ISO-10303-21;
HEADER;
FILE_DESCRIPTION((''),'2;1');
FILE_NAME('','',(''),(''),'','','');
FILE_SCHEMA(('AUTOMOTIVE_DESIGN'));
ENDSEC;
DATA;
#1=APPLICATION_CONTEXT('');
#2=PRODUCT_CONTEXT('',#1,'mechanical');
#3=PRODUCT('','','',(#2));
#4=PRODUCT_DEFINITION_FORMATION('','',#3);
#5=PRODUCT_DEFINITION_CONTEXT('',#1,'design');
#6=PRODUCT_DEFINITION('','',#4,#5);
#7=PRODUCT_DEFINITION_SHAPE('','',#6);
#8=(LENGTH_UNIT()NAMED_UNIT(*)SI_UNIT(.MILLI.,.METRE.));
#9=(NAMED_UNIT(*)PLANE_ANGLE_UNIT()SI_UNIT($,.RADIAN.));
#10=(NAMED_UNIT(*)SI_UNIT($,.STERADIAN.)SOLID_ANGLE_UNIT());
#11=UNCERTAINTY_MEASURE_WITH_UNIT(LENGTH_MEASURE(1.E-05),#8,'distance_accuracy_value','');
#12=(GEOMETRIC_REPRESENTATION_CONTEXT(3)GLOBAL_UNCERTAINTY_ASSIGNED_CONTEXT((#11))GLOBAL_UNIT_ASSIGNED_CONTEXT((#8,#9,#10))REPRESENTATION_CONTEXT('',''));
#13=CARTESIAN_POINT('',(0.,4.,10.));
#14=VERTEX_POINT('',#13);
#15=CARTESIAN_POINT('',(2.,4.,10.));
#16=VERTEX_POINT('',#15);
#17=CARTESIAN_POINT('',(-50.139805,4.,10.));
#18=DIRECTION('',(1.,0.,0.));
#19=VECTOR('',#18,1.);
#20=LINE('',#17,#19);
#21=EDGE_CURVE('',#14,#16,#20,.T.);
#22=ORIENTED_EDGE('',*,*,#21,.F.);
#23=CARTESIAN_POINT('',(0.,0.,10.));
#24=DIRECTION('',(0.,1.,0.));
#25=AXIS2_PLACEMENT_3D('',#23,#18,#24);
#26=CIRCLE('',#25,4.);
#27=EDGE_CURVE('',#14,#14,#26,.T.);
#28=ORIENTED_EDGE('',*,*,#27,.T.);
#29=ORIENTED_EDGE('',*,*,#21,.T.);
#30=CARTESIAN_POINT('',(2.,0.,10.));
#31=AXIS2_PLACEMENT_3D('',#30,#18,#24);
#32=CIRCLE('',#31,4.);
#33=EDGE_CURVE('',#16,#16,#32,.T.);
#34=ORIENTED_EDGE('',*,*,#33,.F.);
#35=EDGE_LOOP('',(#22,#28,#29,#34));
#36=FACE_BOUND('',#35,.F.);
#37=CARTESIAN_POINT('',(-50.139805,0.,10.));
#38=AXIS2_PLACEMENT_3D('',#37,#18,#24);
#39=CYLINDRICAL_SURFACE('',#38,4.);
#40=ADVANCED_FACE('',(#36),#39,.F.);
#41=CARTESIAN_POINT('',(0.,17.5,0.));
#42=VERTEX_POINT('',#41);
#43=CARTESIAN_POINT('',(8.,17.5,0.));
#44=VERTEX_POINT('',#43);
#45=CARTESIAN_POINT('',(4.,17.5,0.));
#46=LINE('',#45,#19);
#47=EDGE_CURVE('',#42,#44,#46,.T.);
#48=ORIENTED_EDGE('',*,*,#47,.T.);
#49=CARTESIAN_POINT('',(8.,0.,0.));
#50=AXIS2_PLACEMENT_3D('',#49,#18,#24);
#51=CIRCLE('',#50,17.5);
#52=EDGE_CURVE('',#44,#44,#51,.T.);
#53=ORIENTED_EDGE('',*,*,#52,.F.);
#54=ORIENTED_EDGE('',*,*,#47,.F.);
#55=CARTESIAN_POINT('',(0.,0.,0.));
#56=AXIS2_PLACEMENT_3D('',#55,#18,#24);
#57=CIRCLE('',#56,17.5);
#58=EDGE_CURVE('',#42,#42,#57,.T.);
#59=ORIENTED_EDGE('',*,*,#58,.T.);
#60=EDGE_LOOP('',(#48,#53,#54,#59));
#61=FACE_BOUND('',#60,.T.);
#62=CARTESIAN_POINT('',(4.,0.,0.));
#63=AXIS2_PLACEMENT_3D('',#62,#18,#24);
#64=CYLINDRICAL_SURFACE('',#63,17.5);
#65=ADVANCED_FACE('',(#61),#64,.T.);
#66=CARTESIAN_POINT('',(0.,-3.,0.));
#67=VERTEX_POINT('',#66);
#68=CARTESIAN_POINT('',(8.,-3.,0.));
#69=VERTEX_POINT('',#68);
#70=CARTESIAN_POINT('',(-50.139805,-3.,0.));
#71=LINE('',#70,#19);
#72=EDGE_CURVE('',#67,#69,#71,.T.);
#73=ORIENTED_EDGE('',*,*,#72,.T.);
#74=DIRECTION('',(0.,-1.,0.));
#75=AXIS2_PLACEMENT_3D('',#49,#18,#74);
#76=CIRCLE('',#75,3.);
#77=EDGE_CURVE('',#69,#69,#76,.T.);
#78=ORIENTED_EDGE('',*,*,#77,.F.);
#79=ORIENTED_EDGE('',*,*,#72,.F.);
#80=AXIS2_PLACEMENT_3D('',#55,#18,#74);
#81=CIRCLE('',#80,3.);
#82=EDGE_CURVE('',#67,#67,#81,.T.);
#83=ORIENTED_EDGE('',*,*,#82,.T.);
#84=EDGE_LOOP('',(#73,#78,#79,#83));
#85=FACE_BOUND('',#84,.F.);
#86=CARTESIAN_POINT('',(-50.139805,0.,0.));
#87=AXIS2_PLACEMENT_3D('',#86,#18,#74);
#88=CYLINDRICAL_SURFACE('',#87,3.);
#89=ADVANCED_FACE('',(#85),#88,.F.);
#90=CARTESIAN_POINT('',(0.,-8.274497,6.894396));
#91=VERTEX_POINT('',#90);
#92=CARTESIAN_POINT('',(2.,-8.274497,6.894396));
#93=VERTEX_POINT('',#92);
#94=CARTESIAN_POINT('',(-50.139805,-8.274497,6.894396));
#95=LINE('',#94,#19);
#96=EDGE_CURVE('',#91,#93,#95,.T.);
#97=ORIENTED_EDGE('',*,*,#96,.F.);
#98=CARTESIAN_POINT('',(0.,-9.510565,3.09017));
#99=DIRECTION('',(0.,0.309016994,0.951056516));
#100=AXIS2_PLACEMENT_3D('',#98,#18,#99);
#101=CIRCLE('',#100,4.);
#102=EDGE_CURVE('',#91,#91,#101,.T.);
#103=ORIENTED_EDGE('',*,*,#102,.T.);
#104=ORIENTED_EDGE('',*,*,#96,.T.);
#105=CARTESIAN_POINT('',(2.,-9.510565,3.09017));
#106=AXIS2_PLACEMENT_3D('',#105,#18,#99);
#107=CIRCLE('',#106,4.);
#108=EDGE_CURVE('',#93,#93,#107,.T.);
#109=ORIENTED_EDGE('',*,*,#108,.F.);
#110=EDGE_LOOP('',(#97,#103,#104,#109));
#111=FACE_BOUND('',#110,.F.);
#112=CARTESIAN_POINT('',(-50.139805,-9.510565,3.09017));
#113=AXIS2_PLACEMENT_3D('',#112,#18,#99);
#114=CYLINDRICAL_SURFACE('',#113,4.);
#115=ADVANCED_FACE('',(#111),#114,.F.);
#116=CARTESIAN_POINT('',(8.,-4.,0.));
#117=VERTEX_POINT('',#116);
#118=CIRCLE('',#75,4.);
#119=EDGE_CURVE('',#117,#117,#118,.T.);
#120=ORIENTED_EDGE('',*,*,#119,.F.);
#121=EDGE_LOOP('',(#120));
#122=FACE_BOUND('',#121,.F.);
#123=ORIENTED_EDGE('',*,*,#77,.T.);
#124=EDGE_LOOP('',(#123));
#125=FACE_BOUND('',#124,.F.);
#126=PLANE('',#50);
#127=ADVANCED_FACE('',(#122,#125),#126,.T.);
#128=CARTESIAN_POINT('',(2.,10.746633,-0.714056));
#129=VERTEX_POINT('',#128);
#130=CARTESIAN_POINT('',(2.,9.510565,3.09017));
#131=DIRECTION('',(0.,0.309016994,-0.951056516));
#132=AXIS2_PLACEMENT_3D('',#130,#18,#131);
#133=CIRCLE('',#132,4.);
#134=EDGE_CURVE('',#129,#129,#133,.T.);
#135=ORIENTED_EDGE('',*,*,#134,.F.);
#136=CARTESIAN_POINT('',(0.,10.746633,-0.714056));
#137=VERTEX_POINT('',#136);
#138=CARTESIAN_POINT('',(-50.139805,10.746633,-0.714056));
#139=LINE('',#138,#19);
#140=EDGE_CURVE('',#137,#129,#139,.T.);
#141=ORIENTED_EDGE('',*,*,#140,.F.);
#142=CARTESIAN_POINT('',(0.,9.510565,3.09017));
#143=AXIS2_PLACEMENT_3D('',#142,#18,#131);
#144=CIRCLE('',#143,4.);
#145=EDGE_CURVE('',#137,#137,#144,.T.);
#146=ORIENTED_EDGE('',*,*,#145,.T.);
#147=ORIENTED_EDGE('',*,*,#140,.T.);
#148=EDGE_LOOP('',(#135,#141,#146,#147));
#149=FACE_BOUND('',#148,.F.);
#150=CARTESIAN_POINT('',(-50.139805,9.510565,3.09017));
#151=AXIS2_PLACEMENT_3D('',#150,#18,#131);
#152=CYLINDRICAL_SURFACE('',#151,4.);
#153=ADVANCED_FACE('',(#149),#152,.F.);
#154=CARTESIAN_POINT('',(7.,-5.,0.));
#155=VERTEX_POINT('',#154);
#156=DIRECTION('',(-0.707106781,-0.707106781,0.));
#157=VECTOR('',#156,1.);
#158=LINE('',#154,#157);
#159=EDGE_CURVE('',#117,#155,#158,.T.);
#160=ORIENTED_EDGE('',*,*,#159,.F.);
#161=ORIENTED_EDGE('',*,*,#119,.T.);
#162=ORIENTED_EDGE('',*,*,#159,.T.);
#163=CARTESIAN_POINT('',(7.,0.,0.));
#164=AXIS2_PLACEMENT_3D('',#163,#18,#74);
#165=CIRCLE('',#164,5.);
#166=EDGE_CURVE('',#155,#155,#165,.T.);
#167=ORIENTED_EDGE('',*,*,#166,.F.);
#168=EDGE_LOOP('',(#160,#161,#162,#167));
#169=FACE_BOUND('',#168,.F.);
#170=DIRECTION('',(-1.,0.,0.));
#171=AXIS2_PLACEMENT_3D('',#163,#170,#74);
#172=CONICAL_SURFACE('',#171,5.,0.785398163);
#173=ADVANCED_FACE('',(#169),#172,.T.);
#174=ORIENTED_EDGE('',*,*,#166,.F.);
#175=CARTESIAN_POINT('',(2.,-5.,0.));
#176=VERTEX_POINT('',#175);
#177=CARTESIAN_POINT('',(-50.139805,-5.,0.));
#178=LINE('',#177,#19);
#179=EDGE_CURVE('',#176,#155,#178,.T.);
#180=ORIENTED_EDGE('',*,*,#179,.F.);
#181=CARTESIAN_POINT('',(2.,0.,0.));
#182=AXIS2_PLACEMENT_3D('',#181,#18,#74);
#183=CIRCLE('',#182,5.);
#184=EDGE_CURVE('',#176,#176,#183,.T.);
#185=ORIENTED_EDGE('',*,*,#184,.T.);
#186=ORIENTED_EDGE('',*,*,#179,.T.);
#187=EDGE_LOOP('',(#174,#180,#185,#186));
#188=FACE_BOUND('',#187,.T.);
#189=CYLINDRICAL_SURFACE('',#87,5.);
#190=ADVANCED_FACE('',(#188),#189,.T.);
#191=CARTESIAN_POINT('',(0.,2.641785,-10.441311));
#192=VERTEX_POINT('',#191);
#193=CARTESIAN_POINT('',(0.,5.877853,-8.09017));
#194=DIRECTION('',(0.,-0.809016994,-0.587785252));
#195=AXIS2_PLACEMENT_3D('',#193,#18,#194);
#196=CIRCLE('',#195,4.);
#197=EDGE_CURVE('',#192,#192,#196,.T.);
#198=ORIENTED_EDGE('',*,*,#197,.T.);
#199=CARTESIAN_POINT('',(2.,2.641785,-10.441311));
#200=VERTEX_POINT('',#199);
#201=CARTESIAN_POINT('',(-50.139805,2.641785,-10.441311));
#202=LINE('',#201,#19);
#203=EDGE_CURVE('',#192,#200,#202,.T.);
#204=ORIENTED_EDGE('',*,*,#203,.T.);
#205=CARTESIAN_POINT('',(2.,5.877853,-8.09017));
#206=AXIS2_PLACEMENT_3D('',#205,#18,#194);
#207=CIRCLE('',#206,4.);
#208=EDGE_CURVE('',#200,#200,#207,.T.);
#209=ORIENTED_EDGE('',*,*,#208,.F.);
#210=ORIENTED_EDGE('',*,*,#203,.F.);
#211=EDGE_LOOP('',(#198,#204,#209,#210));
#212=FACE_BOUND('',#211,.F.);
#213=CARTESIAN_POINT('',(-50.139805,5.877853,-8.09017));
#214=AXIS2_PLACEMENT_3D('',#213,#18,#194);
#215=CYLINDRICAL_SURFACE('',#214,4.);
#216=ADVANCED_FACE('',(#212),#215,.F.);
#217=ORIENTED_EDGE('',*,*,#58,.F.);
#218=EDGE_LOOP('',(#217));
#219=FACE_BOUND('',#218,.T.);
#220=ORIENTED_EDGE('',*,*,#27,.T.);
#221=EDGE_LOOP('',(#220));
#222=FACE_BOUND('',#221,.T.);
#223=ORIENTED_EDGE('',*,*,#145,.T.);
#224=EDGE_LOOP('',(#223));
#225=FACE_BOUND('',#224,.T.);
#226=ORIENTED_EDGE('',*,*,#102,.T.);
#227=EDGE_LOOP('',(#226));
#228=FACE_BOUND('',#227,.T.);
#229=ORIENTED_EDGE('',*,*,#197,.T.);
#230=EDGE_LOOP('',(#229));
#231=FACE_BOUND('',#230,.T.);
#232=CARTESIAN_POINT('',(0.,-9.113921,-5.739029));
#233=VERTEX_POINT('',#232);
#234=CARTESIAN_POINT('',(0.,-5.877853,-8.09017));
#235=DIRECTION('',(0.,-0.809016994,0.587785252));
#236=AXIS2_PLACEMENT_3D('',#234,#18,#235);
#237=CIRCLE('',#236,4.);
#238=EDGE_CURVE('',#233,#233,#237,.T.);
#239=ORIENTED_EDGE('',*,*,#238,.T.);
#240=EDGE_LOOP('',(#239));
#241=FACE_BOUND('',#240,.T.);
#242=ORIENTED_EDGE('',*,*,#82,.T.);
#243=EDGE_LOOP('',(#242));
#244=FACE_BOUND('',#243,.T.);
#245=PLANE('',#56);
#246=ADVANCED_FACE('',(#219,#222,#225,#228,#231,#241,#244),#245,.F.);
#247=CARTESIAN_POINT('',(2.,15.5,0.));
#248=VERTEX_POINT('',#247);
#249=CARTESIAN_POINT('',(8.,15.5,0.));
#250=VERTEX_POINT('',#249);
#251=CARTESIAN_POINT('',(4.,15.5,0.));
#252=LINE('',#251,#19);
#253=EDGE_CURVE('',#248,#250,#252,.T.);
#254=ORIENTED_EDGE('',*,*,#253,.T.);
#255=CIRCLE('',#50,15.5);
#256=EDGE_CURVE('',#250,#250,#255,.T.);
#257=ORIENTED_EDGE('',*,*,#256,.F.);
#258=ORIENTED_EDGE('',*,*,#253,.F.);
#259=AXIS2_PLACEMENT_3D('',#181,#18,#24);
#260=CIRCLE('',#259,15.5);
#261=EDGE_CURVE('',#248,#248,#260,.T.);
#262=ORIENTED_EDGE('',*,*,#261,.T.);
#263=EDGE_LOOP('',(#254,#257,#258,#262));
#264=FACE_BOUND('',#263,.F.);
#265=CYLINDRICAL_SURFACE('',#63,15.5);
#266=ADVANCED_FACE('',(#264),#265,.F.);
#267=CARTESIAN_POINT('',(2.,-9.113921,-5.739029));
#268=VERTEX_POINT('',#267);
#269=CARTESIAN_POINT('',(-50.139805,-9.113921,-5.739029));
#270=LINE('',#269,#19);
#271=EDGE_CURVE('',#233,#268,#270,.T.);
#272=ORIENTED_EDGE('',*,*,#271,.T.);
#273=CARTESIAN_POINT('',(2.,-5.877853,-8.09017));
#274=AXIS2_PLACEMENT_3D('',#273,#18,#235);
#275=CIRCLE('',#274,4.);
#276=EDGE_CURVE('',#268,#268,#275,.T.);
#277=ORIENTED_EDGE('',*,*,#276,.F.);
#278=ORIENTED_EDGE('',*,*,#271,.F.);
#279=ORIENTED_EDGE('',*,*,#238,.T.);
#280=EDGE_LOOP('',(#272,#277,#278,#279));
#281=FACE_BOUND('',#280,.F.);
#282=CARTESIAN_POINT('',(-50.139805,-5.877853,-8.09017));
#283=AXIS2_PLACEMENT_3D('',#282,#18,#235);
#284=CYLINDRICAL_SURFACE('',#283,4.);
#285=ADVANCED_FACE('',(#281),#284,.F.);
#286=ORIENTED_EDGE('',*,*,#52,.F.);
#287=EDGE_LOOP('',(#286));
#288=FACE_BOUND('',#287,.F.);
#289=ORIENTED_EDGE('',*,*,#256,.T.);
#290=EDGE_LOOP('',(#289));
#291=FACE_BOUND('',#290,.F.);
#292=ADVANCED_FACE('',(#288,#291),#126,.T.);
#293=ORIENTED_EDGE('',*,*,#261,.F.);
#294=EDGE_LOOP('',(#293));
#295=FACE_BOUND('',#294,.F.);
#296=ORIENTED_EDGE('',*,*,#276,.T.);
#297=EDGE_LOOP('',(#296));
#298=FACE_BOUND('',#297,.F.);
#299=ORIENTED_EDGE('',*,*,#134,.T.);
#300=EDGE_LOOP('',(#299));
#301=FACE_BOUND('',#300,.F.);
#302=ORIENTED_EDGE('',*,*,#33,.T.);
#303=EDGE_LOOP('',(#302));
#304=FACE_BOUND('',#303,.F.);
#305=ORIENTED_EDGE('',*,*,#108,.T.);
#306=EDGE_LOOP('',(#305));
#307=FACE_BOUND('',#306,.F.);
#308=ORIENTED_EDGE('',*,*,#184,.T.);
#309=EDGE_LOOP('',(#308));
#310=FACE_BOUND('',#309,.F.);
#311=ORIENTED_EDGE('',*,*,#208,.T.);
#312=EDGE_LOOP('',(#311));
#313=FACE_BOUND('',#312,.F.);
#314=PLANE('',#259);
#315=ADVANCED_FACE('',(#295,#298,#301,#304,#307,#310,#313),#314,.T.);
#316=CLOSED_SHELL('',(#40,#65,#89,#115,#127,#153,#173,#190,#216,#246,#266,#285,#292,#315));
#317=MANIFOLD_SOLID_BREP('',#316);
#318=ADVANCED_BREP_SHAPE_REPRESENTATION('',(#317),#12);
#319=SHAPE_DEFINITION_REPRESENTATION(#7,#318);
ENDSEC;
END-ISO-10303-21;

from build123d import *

# Parameters (mm, degrees)
F0_W            = 8
F0_H            = 17.5
F3_D            = 6
F4_T            = -2
F6_D            = 8
F6_COPIES_COUNT = 5
F7_SIZE         = 1


# Not quite as in the source:
# - a pattern or mirror of a feature is missing from the dataset's text; its kind, count and spacing are read off the source's solid


with BuildPart() as f1:
    # F0 (on Top) → F1 (revolve)
    with BuildSketch(Plane.XY):
        with Locations((4, 8.75)):
            Rectangle(F0_W, F0_H)
    revolve(axis=Axis((4, 0, 0), (1, 0, 0)))

    # F3 (through all)
    with Locations(Plane(origin=(0, 0, 0), x_dir=(0, 1, 0), z_dir=(-1, 0, 0))):
        with Locations((0, 0)):
            Hole(F3_D / 2)

    # F4
    f4_openings = [f1.faces().sort_by_distance(p)[0] for p in [
        (8, -17.005025, 0),
    ]]
    offset(amount=F4_T, openings=f4_openings)

    # F6 (through all)
    with Locations(Plane(origin=(0, 0, 0), x_dir=(0, -1, 0), z_dir=(-1, 0, 0))):
        with Locations((0, 10)):
            f6 = Hole(F6_D / 2)

    # F6_copies: F6 ×5 about axis
    f6_copies_axis = Axis((0, 0, 0), (1, 0, 0))
    for i in range(1, F6_COPIES_COUNT):
        add(f6.rotate(f6_copies_axis, i * 360 / F6_COPIES_COUNT), mode=Mode.SUBTRACT)

    # F7
    f7_edges = [f1.edges().sort_by_distance(p)[0] for p in [
        (8, -5, 0),
    ]]
    chamfer(f7_edges, length=F7_SIZE)


solid = f1.part
